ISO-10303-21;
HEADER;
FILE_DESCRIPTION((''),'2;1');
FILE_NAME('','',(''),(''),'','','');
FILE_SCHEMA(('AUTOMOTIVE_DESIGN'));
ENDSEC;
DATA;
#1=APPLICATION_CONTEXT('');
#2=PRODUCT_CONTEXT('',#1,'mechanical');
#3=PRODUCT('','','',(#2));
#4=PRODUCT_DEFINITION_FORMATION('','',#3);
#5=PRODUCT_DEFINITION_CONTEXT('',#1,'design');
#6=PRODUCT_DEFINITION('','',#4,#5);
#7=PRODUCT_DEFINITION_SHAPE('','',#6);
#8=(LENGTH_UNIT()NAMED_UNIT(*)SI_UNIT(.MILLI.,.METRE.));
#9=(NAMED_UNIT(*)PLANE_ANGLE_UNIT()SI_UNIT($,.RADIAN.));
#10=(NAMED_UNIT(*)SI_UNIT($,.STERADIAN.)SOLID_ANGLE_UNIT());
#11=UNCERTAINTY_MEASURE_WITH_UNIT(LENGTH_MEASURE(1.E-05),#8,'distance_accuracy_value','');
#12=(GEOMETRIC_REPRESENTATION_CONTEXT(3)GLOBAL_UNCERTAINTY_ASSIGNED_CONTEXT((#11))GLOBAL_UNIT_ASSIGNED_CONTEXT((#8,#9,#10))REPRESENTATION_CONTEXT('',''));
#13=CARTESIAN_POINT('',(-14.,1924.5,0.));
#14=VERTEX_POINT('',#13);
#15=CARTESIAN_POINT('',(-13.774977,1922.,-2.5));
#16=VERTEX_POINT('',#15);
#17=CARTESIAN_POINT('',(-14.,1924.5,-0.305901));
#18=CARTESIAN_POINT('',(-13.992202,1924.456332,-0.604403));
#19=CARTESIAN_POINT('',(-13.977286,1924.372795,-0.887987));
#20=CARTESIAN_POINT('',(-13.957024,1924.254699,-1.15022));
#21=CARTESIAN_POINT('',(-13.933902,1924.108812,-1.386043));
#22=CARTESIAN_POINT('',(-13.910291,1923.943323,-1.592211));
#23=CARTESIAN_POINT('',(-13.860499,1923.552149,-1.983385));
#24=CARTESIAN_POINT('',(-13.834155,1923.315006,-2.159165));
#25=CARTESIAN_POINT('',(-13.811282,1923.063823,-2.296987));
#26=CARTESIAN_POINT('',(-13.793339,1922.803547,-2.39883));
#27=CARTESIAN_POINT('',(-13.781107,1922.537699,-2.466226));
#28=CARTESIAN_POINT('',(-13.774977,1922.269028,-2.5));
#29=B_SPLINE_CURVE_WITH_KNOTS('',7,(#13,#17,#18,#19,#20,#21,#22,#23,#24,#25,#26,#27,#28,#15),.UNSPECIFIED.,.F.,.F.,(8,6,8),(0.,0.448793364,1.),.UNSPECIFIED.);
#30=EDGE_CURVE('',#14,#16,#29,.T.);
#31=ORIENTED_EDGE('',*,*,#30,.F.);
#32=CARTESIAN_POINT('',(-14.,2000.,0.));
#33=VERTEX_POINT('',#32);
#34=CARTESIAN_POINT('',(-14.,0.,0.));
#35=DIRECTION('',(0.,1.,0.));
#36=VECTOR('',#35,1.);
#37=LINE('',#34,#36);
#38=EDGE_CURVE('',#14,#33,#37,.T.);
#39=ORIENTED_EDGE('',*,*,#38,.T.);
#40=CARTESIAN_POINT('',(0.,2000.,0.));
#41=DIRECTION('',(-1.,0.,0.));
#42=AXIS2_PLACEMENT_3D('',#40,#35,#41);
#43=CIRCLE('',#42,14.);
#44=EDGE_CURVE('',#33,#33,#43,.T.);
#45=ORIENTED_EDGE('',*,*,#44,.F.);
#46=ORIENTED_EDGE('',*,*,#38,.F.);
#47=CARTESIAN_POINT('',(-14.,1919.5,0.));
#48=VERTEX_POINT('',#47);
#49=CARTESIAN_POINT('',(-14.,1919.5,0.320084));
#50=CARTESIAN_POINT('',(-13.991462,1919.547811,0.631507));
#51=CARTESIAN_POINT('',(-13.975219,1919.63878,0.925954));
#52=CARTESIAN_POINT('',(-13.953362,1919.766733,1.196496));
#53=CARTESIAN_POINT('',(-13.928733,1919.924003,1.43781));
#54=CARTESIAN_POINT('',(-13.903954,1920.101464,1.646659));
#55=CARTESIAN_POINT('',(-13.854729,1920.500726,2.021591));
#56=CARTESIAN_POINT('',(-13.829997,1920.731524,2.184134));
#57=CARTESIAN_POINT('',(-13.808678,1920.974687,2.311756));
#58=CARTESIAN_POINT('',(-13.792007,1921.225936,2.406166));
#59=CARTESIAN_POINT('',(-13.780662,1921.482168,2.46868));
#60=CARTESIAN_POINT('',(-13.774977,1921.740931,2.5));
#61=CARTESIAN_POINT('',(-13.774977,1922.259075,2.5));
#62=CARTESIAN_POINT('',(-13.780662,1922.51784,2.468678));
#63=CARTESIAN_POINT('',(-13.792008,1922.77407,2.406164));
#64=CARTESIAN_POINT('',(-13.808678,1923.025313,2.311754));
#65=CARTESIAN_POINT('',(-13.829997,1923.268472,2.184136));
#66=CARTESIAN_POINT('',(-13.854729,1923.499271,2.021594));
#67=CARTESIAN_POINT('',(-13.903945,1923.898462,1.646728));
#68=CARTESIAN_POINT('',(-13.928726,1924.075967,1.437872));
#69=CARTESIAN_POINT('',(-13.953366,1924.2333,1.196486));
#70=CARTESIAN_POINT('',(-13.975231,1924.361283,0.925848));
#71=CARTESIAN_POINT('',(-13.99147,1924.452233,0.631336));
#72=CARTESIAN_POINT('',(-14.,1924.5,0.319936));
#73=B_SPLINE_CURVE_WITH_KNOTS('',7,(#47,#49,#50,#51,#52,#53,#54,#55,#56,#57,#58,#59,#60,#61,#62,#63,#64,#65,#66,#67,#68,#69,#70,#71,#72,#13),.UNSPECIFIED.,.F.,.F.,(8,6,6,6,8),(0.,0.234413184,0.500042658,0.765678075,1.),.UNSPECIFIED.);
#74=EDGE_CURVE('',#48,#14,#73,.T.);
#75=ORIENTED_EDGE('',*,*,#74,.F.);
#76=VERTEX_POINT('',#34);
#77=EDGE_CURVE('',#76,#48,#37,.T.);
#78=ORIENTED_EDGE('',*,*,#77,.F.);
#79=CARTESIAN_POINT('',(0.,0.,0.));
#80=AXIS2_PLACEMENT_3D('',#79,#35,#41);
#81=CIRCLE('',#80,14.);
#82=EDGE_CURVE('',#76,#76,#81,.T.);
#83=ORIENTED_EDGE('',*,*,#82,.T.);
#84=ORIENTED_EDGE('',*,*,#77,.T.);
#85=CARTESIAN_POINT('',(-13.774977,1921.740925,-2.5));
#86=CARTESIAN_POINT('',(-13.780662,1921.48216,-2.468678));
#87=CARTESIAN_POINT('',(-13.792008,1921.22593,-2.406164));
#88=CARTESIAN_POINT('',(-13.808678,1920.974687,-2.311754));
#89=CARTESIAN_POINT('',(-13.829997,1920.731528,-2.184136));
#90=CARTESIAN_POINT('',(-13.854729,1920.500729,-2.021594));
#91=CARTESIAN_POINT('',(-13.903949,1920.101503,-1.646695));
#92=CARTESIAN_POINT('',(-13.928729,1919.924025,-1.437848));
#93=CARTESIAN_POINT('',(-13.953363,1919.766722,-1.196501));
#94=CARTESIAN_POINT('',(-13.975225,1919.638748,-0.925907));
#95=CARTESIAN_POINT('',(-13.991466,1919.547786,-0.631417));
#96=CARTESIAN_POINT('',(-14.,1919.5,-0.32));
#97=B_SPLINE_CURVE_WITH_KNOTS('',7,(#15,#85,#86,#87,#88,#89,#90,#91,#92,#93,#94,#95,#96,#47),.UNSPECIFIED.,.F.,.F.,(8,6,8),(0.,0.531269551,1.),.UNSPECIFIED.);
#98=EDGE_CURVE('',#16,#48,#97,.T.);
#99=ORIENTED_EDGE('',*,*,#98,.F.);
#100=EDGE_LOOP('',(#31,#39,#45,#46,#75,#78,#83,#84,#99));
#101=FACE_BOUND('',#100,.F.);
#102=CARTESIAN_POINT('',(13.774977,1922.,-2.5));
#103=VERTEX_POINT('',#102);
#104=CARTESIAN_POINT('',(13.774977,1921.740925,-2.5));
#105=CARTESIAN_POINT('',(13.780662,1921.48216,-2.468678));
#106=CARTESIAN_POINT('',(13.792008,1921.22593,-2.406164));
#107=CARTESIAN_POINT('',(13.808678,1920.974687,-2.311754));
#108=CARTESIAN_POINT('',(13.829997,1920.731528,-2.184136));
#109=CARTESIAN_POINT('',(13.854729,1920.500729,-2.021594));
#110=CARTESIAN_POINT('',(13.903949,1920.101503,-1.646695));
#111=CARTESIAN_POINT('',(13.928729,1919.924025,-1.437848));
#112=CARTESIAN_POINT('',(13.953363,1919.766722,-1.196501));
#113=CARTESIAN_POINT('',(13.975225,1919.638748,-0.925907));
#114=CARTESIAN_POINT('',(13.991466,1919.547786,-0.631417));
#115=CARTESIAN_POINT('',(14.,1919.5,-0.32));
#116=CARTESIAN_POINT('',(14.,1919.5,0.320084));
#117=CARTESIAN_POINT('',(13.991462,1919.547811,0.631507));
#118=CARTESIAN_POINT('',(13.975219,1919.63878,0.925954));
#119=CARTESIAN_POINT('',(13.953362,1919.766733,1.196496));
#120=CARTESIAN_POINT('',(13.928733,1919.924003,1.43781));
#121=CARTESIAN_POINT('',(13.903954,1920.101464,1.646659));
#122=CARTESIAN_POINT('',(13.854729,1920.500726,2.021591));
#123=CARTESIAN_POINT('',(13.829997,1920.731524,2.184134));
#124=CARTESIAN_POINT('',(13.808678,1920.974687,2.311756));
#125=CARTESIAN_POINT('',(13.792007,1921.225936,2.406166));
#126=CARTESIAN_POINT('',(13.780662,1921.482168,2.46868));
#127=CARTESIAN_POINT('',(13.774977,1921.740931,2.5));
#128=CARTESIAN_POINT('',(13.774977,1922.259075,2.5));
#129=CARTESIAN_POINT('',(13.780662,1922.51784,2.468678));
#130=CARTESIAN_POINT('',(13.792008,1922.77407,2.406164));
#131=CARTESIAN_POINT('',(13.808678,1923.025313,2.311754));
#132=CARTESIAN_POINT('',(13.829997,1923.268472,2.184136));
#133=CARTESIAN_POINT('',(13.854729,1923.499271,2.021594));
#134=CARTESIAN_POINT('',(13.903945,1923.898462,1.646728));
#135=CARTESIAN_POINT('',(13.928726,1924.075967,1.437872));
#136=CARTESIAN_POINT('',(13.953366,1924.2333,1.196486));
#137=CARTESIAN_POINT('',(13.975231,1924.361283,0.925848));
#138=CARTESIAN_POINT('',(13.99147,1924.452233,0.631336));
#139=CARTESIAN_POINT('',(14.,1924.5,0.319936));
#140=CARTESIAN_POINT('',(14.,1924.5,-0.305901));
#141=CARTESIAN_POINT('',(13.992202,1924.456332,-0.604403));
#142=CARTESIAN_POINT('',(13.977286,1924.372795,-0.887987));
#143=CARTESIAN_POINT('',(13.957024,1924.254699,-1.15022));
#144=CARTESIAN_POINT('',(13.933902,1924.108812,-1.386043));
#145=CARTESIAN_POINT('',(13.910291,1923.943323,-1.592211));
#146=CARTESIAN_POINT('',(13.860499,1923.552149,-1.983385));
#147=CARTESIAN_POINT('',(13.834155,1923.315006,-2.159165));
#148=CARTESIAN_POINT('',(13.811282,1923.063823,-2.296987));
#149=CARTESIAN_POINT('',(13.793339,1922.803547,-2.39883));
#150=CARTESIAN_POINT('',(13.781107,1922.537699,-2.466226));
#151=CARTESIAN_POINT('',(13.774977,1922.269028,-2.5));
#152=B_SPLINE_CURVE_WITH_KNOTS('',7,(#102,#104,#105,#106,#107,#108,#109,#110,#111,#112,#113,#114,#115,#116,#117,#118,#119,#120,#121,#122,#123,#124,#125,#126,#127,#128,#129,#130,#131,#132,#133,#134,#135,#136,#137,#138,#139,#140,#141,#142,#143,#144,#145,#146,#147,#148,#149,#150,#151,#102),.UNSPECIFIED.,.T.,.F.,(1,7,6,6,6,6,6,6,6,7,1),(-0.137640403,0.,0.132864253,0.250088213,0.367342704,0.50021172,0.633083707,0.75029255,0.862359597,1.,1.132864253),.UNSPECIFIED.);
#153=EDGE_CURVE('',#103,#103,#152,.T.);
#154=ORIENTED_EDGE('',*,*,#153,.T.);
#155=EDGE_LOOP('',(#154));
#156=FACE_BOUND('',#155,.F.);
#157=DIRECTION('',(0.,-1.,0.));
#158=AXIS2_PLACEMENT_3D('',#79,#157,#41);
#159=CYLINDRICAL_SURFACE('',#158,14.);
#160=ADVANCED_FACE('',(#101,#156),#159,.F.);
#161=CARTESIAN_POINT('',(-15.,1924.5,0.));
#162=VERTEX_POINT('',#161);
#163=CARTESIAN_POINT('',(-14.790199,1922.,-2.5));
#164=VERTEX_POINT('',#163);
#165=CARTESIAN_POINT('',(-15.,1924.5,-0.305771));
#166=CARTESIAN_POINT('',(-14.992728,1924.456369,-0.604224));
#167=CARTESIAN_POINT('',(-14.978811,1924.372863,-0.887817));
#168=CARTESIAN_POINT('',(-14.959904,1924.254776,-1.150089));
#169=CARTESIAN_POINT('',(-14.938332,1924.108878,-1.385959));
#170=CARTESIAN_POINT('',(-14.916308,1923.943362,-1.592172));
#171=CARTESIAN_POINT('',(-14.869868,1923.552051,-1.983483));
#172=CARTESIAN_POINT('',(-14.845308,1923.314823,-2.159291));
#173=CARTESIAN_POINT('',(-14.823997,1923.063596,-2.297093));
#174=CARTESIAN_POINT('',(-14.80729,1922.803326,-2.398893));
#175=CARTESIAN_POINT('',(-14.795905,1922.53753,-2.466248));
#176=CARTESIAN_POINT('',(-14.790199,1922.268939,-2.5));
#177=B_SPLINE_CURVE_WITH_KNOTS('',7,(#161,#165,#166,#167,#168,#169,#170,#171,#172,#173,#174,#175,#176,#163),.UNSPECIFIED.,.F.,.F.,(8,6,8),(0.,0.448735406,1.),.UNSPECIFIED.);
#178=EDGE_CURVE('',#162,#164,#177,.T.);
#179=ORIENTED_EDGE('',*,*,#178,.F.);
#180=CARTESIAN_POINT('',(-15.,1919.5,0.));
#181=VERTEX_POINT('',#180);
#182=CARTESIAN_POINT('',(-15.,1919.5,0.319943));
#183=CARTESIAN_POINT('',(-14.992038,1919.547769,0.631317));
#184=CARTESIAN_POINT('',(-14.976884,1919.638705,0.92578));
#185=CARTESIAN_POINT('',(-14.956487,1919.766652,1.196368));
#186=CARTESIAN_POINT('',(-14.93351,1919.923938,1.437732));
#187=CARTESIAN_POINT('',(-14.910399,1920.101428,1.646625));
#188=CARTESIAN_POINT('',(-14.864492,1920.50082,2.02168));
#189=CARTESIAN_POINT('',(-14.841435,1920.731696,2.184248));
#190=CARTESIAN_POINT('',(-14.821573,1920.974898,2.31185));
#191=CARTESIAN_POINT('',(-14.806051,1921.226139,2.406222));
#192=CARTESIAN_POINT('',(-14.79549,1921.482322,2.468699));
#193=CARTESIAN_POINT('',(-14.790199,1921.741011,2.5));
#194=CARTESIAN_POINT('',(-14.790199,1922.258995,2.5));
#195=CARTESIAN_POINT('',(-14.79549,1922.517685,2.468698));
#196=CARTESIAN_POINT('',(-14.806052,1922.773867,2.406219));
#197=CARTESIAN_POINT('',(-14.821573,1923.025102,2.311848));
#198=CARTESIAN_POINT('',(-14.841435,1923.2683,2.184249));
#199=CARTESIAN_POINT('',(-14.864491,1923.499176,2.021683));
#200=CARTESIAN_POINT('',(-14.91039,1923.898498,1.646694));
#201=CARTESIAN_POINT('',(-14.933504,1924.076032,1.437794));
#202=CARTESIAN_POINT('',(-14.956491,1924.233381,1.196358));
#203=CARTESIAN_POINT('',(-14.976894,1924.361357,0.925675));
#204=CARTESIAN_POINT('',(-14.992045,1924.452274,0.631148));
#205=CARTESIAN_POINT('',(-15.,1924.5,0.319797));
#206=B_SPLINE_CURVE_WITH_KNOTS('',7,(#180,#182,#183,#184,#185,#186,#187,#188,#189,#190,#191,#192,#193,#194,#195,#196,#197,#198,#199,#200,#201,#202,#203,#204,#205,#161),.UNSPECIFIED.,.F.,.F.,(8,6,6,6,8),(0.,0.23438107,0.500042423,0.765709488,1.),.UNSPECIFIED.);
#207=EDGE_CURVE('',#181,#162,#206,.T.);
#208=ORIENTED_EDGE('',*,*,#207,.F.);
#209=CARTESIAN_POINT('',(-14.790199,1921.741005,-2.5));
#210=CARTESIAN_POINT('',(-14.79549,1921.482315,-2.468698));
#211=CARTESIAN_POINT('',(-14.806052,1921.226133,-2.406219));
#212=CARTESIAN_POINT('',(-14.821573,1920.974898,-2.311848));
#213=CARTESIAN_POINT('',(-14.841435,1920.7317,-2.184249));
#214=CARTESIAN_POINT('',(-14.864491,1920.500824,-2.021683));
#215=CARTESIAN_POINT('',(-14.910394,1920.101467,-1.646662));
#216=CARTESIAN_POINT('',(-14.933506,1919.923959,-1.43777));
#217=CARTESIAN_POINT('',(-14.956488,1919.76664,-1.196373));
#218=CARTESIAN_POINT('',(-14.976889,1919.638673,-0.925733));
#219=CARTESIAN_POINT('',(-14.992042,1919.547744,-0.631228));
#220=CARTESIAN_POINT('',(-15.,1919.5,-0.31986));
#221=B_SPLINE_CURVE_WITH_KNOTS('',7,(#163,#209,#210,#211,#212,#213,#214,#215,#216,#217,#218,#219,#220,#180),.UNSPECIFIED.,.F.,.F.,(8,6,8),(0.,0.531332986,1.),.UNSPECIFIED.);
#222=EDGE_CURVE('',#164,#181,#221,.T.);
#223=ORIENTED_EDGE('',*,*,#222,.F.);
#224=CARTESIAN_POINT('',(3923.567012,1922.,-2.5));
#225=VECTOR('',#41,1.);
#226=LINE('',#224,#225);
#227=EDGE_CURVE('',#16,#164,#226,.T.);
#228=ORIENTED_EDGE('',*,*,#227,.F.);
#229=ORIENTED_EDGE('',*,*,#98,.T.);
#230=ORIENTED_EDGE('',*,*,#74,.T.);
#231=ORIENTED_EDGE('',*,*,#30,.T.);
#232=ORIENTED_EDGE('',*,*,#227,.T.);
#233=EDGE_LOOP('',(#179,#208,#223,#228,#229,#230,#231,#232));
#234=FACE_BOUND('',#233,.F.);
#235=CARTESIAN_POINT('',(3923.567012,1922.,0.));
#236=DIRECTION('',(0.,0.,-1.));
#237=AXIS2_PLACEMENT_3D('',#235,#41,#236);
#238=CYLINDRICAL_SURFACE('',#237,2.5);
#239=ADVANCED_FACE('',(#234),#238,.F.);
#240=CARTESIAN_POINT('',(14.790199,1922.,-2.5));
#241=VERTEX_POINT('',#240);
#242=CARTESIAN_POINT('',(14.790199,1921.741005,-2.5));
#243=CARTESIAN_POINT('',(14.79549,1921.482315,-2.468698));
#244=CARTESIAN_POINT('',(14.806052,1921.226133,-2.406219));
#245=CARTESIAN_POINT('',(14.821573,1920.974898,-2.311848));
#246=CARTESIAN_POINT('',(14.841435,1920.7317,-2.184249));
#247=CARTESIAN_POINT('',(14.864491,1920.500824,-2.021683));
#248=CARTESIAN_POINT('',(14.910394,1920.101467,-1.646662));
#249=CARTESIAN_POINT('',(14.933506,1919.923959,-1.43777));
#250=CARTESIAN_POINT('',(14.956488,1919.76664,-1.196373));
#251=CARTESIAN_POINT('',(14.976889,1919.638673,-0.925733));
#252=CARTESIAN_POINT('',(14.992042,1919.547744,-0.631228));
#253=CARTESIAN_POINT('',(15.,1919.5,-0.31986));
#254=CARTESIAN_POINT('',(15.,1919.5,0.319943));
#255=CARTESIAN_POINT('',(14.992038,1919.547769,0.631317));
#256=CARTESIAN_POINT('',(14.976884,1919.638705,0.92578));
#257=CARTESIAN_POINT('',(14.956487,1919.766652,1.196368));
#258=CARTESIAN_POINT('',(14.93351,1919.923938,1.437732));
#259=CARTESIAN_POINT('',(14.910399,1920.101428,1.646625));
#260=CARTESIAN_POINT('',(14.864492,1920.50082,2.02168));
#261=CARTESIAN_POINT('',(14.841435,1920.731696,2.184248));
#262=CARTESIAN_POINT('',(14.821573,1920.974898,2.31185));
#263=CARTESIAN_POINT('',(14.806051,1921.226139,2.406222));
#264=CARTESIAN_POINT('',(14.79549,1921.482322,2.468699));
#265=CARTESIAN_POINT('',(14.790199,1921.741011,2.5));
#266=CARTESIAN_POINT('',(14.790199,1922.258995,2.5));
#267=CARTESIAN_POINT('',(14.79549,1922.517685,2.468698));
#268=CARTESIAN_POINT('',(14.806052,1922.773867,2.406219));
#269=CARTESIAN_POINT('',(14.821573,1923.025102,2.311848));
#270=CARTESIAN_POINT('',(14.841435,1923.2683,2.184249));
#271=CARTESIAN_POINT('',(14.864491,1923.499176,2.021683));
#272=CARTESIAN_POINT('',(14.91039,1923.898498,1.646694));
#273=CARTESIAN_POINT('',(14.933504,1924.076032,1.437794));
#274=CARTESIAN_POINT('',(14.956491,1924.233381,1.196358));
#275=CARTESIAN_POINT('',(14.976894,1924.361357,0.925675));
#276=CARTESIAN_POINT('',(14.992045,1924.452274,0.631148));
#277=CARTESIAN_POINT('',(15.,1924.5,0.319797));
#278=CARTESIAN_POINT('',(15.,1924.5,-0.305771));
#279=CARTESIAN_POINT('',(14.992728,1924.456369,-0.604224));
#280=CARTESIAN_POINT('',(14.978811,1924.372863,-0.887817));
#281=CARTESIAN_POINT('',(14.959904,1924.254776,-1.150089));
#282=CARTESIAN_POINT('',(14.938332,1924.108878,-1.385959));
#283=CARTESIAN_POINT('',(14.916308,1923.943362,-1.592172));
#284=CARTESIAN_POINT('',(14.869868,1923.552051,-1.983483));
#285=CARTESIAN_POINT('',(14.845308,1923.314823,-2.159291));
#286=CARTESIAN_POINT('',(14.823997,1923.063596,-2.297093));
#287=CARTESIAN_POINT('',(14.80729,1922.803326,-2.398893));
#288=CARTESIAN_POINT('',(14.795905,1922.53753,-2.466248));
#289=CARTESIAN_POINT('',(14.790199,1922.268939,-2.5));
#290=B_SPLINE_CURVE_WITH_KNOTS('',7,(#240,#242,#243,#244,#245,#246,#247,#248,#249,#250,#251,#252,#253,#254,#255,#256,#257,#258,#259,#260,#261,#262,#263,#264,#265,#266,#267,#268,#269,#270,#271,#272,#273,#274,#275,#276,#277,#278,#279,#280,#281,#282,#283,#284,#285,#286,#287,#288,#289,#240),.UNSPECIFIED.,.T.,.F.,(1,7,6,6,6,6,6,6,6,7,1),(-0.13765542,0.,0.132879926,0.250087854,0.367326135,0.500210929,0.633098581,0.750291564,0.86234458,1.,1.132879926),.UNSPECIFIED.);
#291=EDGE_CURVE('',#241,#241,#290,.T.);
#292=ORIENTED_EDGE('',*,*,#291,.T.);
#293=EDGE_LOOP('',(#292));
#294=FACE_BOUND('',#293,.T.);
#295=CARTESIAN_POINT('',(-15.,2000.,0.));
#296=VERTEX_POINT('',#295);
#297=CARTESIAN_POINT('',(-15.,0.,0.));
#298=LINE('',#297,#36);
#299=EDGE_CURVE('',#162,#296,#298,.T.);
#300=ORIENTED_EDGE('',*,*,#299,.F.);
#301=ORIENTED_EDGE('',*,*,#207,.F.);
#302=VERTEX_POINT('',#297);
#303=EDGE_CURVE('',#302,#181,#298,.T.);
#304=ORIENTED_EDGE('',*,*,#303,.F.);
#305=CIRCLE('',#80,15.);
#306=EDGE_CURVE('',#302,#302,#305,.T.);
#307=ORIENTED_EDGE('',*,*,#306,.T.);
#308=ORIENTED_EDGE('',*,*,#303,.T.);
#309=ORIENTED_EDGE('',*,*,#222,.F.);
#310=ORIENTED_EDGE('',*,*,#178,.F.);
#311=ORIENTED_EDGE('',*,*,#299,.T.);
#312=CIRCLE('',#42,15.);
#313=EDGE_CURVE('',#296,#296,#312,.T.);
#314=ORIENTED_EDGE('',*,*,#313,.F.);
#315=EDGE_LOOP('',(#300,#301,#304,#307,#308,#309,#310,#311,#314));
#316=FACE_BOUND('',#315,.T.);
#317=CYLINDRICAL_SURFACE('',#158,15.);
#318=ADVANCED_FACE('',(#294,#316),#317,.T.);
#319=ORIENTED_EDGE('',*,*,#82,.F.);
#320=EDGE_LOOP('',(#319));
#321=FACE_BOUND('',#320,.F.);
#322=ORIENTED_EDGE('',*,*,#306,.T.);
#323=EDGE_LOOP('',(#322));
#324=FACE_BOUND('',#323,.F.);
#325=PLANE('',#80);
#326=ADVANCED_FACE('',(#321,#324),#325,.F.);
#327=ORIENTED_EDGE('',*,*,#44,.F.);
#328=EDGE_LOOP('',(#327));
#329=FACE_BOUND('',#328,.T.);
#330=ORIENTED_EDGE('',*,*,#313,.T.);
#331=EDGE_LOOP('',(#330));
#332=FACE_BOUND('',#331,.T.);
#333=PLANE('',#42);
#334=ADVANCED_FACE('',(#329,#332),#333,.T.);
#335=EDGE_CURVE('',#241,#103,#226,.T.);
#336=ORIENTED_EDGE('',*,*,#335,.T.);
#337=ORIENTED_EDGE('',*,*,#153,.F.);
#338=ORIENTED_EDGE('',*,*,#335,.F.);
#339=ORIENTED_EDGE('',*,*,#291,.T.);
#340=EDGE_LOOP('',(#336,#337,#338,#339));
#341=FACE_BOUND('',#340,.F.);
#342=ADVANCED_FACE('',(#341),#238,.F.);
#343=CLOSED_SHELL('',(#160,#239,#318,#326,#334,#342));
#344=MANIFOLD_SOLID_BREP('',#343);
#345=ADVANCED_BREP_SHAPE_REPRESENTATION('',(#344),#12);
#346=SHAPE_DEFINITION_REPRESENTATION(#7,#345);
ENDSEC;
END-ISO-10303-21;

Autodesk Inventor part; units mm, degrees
ref_plane "YZ Plane" through (0, 0, 0) normal (1, 0, 0) x (0, 1, 0)
ref_plane "XZ Plane" through (0, 0, 0) normal (0, 1, 0) x (-1, 0, 0)
ref_plane "XY Plane" through (0, 0, 0) normal (0, 0, 1) x (1, 0, 0)
sketch "Sketch1" plane through (0, 0, 0) normal (0, 1, 0) x (-1, 0, 0)
  circle A0 centre (0, 0) radius 15
  circle A1 centre (0, 0) radius 14
  dimension "d0" = 30
  dimension "d1" = 28
extrude "Extrusion1" add sketch "Sketch1" along normal blind 2000
sketch "Sketch2" plane through (0, 0, 0) normal (1, 0, 0) x (0, 1, 0)
  line L0 (2000, 14) -> (2000, -14) projected
  point P0 (0, 0)
  point P1 (1922, 0)
  dimension "d4" = 78
hole "Hole1" at (0, 1922, 0) direction (-1, 0, 0) diameter 5 end through all both
properties part number "COTS_CarbonCenter_Fiberglass_30x28x2000mm_Pipe"
